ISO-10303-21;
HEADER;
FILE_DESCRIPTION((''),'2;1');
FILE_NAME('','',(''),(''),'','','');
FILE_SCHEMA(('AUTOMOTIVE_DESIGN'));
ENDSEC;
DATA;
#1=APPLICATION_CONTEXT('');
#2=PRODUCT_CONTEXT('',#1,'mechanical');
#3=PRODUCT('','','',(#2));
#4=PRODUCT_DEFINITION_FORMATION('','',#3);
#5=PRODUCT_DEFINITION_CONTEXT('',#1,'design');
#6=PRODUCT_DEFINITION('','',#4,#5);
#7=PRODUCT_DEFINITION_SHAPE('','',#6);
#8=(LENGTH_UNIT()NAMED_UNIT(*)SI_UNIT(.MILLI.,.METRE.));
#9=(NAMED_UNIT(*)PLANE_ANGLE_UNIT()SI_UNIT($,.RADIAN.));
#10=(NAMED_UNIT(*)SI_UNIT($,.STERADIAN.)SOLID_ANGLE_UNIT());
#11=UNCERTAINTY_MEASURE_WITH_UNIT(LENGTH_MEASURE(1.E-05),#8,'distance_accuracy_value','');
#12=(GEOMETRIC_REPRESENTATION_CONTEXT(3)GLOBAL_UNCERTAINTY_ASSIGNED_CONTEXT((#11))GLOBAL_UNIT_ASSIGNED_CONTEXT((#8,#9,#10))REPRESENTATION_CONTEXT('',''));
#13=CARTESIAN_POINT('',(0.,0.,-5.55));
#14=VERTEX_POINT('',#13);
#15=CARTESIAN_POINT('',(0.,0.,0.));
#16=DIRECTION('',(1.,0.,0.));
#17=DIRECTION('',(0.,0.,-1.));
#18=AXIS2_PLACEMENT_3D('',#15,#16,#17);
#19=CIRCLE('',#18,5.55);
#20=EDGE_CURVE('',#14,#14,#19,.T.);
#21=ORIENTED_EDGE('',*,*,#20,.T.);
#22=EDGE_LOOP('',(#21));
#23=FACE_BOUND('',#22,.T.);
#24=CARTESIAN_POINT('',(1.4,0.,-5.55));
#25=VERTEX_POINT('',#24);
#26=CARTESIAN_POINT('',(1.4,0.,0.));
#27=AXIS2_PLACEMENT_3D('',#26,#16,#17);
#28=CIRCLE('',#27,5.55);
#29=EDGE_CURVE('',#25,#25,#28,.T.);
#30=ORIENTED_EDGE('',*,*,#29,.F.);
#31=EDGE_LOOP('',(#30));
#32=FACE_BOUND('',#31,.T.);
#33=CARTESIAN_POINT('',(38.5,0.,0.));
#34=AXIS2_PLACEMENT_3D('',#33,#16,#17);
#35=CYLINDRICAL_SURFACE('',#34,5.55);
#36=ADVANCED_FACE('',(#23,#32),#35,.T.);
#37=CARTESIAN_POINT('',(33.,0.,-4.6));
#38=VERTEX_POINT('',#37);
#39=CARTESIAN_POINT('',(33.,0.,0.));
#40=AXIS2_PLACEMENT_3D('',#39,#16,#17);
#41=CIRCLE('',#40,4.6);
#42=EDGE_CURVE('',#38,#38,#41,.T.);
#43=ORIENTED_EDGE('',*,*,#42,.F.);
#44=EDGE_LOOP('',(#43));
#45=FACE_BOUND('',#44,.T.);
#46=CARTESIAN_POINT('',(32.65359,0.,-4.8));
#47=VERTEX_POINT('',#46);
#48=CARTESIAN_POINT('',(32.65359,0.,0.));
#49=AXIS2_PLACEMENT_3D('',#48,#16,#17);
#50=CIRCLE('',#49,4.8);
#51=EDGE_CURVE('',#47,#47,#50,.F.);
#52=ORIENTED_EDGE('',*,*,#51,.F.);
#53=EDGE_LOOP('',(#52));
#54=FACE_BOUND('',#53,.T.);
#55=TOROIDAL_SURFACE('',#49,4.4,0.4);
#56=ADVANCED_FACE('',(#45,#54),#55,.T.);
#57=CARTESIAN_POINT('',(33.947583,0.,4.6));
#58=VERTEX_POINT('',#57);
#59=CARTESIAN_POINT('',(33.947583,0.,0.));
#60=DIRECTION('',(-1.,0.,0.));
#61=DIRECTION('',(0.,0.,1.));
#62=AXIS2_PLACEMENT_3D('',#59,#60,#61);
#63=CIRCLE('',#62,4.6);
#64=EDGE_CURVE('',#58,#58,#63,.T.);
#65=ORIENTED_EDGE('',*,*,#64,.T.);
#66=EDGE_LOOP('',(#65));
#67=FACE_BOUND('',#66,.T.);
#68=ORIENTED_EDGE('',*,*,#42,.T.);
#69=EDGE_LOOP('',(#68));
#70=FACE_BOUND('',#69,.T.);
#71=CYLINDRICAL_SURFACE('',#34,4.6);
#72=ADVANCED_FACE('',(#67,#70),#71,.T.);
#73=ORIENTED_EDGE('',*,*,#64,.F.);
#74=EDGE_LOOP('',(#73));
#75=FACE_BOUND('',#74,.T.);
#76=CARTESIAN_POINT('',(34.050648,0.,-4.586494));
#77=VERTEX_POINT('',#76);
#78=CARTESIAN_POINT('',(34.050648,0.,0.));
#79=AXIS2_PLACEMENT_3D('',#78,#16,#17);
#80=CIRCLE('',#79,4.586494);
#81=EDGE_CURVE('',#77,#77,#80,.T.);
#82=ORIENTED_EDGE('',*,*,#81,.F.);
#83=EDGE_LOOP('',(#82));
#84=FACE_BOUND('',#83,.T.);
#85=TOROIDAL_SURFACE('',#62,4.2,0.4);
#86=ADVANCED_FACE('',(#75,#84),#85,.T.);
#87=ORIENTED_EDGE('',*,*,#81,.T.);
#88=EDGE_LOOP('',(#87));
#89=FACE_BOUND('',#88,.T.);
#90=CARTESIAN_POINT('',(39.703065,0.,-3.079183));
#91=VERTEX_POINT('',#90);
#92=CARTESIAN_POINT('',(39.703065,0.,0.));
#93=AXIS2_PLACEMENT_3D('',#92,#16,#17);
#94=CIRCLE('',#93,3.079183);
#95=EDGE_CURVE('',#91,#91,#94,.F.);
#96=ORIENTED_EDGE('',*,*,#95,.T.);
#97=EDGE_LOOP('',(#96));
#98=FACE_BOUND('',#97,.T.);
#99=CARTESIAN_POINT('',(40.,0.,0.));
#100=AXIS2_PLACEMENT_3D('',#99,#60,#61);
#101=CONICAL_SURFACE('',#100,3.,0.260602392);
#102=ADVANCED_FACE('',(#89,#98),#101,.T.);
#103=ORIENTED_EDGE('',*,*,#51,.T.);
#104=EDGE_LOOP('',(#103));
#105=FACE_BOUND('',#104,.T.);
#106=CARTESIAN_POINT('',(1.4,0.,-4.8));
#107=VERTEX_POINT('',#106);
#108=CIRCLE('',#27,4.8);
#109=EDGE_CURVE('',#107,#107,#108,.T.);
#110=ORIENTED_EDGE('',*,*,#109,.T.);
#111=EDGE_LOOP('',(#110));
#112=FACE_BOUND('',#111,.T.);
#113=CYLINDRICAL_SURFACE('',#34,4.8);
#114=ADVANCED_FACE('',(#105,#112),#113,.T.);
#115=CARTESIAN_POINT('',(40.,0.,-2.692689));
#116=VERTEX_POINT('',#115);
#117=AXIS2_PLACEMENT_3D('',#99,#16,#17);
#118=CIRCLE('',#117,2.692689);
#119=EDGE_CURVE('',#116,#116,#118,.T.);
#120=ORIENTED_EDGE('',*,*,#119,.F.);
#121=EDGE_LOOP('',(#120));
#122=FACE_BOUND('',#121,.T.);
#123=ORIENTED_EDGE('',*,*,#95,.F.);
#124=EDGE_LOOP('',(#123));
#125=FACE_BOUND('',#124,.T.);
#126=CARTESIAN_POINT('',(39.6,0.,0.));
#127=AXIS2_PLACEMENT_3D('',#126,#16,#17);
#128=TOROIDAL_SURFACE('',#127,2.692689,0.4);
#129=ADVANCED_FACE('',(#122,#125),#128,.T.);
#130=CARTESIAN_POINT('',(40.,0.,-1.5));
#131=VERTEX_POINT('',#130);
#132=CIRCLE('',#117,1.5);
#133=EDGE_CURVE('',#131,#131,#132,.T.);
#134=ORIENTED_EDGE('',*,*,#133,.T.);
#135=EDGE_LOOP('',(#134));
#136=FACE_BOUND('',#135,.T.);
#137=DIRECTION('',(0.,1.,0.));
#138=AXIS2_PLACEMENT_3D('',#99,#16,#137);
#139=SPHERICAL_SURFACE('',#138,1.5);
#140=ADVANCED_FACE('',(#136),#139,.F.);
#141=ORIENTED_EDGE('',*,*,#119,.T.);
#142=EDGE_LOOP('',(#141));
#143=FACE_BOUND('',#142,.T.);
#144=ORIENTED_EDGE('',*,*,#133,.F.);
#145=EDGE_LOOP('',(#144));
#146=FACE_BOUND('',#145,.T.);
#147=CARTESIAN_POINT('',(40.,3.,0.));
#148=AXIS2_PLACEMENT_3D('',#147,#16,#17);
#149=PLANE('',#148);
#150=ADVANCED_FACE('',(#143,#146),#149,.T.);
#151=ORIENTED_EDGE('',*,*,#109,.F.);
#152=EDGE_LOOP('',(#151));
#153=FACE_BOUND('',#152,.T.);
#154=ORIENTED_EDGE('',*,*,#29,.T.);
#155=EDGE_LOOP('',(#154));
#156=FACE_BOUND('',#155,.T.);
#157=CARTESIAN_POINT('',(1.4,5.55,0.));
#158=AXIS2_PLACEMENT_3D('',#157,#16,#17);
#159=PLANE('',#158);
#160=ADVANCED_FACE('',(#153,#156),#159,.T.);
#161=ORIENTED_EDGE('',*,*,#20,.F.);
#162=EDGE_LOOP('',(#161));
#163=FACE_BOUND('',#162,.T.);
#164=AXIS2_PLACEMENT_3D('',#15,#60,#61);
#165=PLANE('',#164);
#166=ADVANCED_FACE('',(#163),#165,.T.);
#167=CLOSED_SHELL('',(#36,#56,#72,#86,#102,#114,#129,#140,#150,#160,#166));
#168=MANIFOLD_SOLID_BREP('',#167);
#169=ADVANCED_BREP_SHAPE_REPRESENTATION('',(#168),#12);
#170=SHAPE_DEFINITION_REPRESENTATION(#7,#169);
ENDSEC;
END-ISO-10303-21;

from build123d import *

# Parameters (mm, degrees)
FILETE1_R = 0.4
FILETE2_R = 0.4
FILETE3_R = 0.4


with BuildPart() as part:
    # Esboço1 → Revolução1 (revolve)
    with BuildSketch(Plane.XY, mode=Mode.PRIVATE) as revolu_o1_sk:
        with BuildLine():
            Line((0, 0), (0, 5.55))
            Line((0, 5.55), (1.4, 5.55))
            Line((1.4, 5.55), (1.4, 4.8))
            Line((1.4, 4.8), (33, 4.8))
            Line((33, 4.8), (33, 4.6))
            Line((33, 4.6), (34, 4.6))
            Line((34, 4.6), (40, 3))
            Line((40, 3), (40, 1.5))
            ThreePointArc((40, 1.5), (38.939339828, 1.060660172), (38.5, 0))
            Line((38.5, 0), (0, 0))
        make_face()
    revolve(revolu_o1_sk.sketch.rotate(Axis((38.5, 0, 0), (-1, 0, 0)), 90), axis=Axis((38.5, 0, 0), (-1, 0, 0)))

    # Filete1
    # the kernel refuses this fillet: 0.4 mm, written as the material it takes off along each edge
    with BuildSketch(Plane(origin=(33, 0, 0), x_dir=(0, 0, -1), z_dir=(0, 1, 0))) as filete1_piece_1:
        with BuildLine():
            CenterArc((4.4, 0.346410162), FILETE1_R, 300, 60)
            Line((4.6, 0), (4.604, -0.006928203))
            ThreePointArc((4.604, -0.006928203), (4.7, -0.008), (4.8, -0.008))
            Line((4.8, -0.008), (4.808, 0))
            Line((4.808, 0), (4.808, 0.346410162))
            Line((4.808, 0.346410162), (4.8, 0.346410162))
        make_face()
    revolve(axis=Axis((33, 0, 0), (-1, 0, 0)), mode=Mode.SUBTRACT)

    # Filete2
    filete2_edges = [part.edges().sort_by_distance(p)[0] for p in [
        (34, 0, 4.6),
    ]]
    fillet(filete2_edges, radius=FILETE2_R)

    # Filete3
    filete3_edges = [part.edges().sort_by_distance(p)[0] for p in [
        (40, 0, 3),
    ]]
    fillet(filete3_edges, radius=FILETE3_R)


solid = part.part
